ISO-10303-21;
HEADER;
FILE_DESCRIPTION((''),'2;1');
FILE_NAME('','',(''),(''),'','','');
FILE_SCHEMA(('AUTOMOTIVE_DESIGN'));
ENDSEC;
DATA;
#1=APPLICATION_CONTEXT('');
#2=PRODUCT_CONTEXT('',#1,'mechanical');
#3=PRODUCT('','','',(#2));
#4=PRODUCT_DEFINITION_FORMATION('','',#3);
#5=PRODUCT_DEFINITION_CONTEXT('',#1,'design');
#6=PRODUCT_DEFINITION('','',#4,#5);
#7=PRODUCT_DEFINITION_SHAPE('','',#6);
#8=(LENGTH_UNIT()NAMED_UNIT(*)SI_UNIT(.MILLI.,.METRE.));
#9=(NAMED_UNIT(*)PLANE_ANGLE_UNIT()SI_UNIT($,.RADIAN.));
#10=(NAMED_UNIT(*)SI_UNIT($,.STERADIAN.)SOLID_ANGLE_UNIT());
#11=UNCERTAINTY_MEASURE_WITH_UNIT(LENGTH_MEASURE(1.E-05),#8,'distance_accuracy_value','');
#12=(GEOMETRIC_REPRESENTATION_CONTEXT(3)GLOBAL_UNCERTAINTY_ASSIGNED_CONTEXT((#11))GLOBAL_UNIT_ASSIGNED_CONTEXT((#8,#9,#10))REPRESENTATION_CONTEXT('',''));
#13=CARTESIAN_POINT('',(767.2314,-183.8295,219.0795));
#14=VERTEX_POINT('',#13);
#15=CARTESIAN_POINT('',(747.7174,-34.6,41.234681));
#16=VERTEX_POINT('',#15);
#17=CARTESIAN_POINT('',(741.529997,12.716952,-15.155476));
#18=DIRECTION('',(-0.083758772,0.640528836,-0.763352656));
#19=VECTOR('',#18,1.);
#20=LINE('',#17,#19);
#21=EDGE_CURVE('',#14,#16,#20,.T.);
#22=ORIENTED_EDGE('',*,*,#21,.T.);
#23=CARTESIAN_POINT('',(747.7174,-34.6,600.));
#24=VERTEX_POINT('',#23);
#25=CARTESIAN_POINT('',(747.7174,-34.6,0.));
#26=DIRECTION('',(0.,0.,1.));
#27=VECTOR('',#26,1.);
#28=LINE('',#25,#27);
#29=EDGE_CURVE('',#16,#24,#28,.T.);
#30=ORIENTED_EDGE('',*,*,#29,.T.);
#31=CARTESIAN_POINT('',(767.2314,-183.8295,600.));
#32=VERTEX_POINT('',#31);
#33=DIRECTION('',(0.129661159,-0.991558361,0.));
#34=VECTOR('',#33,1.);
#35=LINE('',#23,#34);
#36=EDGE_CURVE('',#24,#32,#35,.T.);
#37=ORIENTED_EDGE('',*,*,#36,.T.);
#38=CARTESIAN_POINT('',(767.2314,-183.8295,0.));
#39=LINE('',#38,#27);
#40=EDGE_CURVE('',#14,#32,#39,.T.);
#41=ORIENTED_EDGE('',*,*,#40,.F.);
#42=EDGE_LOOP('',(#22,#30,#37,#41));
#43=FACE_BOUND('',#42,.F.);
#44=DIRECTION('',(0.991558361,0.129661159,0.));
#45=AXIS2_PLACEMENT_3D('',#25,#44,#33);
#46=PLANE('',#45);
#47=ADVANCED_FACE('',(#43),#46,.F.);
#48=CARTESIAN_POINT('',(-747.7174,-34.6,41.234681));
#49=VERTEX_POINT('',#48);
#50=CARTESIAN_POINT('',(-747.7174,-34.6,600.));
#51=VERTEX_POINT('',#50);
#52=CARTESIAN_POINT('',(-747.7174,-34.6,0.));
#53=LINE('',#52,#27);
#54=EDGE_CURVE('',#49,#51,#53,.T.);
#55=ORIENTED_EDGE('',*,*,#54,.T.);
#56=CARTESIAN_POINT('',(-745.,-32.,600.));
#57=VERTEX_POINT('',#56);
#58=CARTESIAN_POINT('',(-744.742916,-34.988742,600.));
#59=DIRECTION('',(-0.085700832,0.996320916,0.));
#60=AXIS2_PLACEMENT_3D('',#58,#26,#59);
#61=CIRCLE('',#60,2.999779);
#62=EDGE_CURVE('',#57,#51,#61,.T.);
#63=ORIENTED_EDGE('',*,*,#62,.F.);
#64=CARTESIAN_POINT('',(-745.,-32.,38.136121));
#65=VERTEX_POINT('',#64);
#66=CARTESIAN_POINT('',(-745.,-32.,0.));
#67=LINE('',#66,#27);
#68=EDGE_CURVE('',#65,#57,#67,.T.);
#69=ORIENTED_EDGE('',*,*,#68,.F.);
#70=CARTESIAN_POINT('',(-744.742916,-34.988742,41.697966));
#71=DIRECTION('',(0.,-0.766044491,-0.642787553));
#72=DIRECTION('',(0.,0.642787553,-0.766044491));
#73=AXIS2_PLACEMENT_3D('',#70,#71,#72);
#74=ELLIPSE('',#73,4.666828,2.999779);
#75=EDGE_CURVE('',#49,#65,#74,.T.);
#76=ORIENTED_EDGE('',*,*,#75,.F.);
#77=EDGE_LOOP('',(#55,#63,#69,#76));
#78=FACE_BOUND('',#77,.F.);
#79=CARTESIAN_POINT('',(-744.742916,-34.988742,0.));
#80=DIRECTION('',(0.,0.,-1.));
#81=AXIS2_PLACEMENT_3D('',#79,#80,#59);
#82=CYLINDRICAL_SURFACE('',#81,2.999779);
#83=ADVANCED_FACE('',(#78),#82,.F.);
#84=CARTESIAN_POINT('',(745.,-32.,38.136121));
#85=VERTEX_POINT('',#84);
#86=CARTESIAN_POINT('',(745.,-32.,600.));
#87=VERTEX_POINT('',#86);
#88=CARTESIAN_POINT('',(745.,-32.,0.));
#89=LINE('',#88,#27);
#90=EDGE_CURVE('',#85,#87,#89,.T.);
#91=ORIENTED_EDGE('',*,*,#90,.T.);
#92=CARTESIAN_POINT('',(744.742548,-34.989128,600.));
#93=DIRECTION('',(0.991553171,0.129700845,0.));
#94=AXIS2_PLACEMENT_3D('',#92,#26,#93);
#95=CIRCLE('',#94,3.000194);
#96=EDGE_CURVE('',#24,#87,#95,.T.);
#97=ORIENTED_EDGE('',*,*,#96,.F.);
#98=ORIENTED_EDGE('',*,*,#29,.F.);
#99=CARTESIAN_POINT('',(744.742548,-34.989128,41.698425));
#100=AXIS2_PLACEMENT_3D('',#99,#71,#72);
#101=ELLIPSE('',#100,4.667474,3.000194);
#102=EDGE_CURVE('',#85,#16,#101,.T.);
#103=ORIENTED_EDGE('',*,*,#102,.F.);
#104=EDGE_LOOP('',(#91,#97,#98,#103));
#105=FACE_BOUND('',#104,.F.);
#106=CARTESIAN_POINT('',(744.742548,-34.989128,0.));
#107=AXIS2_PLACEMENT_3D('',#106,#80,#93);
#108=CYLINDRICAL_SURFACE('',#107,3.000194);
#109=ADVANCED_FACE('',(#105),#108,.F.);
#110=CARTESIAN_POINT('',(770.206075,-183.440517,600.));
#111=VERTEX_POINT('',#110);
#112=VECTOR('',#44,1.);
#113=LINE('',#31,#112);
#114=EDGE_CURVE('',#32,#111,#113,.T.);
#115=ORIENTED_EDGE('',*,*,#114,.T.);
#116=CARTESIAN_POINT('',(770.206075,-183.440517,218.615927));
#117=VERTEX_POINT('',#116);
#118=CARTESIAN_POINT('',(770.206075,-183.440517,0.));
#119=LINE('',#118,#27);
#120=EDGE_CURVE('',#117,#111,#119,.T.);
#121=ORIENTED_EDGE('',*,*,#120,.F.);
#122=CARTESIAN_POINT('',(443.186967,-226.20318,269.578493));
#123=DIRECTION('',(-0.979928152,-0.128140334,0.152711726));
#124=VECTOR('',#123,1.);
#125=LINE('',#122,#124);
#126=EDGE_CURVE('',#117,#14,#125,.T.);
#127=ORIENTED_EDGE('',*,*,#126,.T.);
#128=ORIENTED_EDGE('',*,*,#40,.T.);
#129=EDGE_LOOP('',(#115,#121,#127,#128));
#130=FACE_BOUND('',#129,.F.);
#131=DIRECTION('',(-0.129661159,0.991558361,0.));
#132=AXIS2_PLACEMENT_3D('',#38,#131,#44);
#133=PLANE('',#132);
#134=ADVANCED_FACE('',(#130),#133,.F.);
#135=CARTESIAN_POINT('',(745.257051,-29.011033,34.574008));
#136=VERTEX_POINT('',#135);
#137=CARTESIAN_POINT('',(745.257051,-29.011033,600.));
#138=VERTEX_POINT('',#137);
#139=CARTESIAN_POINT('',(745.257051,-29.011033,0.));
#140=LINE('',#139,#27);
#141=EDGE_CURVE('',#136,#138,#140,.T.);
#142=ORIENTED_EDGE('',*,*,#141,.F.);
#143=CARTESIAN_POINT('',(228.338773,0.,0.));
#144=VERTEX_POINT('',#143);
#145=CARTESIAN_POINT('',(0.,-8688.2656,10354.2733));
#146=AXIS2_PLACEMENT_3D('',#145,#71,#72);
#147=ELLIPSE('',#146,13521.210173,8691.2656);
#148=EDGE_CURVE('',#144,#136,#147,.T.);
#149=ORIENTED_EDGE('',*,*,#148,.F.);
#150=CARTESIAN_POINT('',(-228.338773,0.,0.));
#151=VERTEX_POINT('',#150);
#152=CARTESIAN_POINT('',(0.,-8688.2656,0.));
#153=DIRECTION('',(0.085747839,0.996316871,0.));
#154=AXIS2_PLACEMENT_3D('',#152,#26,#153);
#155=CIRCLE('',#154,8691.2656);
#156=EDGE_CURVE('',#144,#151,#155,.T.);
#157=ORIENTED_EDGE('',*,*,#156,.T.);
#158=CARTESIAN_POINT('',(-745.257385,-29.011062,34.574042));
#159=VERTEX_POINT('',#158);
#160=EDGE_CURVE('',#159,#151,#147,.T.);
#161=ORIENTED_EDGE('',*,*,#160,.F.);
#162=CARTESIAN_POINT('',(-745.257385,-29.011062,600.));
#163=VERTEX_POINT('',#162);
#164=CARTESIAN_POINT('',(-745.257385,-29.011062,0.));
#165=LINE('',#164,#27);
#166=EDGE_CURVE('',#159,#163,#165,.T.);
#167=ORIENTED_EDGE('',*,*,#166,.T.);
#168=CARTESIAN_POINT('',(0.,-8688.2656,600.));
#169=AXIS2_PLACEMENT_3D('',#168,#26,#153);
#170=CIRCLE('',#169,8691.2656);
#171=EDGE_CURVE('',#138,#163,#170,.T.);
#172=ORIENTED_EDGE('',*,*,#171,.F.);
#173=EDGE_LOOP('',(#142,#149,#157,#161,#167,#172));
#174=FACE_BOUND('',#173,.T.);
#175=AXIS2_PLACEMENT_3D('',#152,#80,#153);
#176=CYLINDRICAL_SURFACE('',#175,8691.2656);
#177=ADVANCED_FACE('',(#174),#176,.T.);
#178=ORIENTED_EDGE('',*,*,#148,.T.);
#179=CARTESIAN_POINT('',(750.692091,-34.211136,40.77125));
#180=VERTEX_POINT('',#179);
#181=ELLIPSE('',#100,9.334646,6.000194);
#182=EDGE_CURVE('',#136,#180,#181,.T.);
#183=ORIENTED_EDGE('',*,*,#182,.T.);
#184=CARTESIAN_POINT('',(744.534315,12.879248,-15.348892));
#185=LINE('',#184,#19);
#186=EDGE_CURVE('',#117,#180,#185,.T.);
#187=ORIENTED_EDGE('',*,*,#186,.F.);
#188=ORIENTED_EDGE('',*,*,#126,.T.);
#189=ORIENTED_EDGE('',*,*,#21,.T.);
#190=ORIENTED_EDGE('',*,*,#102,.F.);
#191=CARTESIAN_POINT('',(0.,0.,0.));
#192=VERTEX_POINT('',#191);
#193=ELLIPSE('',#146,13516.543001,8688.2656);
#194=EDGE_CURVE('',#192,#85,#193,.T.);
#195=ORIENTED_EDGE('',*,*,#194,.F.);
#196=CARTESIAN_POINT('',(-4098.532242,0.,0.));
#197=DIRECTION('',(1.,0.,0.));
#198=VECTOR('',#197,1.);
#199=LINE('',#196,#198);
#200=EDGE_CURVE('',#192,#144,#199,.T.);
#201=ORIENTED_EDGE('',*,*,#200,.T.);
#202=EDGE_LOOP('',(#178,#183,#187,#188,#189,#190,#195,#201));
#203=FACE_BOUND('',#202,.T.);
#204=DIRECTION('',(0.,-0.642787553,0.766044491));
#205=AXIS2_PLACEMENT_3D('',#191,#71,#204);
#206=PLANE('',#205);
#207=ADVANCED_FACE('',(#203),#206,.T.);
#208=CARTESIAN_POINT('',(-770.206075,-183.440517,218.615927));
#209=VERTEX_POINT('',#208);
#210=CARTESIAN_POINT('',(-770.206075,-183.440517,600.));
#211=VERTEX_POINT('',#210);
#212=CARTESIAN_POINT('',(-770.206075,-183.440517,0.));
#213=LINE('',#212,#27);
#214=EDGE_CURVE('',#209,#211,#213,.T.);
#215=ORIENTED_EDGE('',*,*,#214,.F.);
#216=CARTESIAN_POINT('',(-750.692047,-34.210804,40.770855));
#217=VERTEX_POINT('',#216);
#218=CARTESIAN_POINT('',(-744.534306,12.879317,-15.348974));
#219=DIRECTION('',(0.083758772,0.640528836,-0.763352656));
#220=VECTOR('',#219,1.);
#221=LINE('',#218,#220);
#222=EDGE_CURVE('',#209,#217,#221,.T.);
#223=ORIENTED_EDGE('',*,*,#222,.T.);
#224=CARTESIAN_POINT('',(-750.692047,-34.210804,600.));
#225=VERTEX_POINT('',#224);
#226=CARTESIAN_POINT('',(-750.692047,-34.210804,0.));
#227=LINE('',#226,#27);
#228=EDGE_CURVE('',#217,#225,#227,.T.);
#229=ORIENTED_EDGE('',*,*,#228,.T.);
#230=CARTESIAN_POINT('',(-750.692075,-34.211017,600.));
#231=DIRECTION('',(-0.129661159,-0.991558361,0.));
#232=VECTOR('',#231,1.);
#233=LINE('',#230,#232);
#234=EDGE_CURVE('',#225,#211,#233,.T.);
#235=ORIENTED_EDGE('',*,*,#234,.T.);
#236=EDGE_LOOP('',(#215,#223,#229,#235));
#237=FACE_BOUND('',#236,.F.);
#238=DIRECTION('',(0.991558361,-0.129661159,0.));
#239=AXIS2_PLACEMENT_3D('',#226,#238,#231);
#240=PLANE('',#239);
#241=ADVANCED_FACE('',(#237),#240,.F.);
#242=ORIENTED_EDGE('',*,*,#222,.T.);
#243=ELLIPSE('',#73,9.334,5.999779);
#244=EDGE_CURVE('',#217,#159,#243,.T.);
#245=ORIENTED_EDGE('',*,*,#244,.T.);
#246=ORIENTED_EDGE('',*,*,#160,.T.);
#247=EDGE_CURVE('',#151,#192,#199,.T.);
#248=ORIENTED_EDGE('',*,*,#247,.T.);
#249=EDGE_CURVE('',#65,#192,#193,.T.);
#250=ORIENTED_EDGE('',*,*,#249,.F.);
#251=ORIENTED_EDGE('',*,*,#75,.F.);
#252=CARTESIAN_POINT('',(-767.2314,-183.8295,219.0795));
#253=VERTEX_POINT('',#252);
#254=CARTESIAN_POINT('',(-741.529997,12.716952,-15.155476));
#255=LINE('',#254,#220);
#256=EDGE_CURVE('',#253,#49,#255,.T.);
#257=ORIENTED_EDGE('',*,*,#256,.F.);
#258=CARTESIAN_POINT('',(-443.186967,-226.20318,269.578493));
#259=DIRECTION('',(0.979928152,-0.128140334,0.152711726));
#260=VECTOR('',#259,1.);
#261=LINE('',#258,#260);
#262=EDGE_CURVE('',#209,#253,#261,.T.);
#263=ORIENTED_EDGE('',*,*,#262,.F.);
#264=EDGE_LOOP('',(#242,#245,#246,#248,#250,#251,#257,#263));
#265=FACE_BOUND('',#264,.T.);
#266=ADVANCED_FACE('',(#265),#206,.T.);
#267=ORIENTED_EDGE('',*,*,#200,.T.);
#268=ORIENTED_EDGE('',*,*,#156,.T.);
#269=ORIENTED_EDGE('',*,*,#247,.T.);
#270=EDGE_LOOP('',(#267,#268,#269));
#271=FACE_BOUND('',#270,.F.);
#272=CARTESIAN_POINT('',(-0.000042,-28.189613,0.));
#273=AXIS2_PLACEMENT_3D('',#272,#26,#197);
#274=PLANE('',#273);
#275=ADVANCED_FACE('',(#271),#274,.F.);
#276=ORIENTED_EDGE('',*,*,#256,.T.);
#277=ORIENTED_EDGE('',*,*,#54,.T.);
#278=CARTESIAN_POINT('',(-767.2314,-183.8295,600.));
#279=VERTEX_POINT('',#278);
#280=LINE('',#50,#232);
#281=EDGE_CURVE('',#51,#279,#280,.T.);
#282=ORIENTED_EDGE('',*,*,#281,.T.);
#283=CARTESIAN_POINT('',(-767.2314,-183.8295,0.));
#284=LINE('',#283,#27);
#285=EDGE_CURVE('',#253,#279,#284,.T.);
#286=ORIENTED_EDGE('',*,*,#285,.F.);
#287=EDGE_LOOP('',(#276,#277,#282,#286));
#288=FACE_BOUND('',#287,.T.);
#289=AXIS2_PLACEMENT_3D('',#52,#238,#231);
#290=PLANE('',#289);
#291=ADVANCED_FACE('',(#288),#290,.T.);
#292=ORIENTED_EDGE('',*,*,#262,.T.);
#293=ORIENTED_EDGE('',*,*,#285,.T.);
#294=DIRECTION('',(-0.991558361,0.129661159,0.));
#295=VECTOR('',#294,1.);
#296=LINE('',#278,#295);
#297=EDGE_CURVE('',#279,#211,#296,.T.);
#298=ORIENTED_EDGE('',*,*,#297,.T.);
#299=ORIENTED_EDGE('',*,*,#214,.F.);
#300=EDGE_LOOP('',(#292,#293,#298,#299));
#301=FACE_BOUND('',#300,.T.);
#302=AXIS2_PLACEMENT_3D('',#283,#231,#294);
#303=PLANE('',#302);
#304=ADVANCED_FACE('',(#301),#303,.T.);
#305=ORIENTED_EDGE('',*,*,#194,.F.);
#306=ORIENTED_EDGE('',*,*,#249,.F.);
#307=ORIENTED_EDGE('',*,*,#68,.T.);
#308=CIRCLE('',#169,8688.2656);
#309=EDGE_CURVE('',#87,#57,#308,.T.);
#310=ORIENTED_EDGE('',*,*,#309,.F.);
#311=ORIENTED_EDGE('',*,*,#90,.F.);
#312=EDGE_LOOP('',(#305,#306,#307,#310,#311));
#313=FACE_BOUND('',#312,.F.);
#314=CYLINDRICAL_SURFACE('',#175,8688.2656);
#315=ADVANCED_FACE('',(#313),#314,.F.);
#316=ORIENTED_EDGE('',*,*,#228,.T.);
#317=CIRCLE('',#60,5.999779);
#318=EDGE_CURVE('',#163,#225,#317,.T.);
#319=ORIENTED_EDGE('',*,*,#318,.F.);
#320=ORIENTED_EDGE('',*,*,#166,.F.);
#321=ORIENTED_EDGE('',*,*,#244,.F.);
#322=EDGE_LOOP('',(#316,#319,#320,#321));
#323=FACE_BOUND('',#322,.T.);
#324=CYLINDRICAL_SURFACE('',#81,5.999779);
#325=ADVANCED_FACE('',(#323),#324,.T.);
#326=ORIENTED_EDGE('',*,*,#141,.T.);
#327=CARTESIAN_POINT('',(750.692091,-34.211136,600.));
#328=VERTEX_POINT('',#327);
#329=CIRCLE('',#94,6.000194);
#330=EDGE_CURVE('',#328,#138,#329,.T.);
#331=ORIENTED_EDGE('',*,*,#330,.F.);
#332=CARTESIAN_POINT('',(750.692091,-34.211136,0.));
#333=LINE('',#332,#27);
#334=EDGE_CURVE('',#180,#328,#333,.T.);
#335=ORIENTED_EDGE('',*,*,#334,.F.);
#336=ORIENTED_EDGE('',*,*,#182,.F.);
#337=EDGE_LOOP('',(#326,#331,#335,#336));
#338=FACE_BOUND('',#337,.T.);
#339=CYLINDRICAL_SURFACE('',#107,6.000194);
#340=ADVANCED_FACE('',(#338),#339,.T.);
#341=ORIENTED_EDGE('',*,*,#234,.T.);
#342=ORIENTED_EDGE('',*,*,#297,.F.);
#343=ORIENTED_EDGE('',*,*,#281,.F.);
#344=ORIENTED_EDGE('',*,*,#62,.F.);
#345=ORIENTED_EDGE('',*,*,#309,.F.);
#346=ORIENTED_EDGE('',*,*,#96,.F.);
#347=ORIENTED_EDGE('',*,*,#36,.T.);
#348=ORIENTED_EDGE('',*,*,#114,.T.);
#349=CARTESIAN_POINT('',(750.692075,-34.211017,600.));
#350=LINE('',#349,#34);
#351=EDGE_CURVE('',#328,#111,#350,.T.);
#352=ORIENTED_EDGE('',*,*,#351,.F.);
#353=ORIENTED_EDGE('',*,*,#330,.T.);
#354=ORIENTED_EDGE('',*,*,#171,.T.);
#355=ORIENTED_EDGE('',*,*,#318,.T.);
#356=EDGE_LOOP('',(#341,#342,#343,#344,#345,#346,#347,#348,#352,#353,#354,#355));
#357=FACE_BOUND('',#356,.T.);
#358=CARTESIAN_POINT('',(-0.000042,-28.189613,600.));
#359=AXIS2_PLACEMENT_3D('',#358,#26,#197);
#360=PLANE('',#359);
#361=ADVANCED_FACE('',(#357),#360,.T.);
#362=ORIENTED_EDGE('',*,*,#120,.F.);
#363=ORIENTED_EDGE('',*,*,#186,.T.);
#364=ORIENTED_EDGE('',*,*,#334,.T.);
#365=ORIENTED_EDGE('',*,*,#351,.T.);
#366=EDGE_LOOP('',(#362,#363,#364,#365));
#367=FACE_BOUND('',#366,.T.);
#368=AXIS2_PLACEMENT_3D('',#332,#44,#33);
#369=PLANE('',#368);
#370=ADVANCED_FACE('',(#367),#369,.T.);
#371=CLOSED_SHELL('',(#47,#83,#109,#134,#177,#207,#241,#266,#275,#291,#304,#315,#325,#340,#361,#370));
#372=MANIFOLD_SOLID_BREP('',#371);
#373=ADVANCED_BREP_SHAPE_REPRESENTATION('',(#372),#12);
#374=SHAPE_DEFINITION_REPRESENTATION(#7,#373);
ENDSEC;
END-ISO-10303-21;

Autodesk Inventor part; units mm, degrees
ref_plane "YZ Plane" through (0, 0, 0) normal (1, 0, 0) x (0, 1, 0)
ref_plane "XZ Plane" through (0, 0, 0) normal (0, 1, 0) x (-1, 0, 0)
ref_plane "XY Plane" through (0, 0, 0) normal (0, 0, 1) x (1, 0, 0)
sketch "Sketch1" plane through (0, 0, 0) normal (0, 0, 1) x (1, 0, 0)
  line L0 (-785, -32) -> (785, -32) construction
  line L1 (785, -32) -> (785, 0) construction
  line L2 (785, 0) -> (-785, 0) construction
  line L3 (-785, 0) -> (-785, -32) construction
  arc A0 (745, -32) -> (-745, -32) centre (0, -8688.2656) ccw
  arc A1 (-745, -32) -> (-747.7174, -34.6) centre (-744.7428, -34.989) ccw
  line L4 (-747.7174, -34.6) -> (-767.2314, -183.8295)
  arc A2 (747.7174, -34.6) -> (745, -32) centre (744.7428, -34.989) ccw
  line L5 (747.7174, -34.6) -> (767.2314, -183.8295)
  line L6 (0, 0) -> (0, -32) construction
  dimension "d0" = 1570
  dimension "d1" = 32
  dimension "d2" = 40
  dimension "d14" = 3
  dimension "d15" = 150.5
  dimension "d16" = 97.45
  dimension "d21" = 8688.2656
contour flange "Contour Flange1" sketch "Sketch1" thickness 3 bend radius 3 width 600 along (0, 0, 1) mid plane no both sides no wall seen from (757.4744, -109.2147, 0) lies toward (0.9915584, 0.1296609, 0) curves L5 A2 A0 A1 L4
bend "Bend1"
corner "Corner1"
sketch "Sketch2" plane through (0, 0, 0) normal (1, 0, 0) x (0, 1, 0)
  line L0 (3, 0) -> (3, 600) construction
  line L1 (0, 600) -> (-183.8295, 380.9205)
  line L2 (3, 0) -> (-29.011, 0) projected
  line L3 (0, 0) -> (-183.8295, 219.0795)
  line L4 (-183.8295, 0) -> (-183.8295, 600) projected
  line L5 (3, 600) -> (-183.8295, 600)
  line L6 (-183.8295, 0) -> (3, 0)
  line L7 (0, 0) -> (-32, 0) projected
  line L8 (-32, 600) -> (0, 600) projected
  line L9 (0, 0) -> (0, 600) construction
  point P0 (-29.011, 0)
  point P1 (0, 0)
  dimension "d20" = 40
extrude "Extrusion1" cut sketch "Sketch2" along normal through all both and the other way through all contours L2 L6 L4 L3
equation "\"d14\" = BendRadius"
equation "\"d3\" = Thickness"
equation "\"d4\" = BendReliefWidth"
equation "\"d5\" = BendReliefDepth"
equation "\"d6\" = MinimumRemnant"
equation "\"d7\" = TransitionRadius"
equation "\"d9\" = BendRadius"
equation "\"d11\" = CornerReliefSize"
equation "\"d12\" = GapSize"
equation "\"d13\" = JacobiRadiusSize"
equation "\"BendRadius\" = Thickness"
equation "\"BendReliefWidth\" = Thickness"
equation "\"BendReliefDepth\" = 0.5 * Thickness"
equation "\"CornerReliefSize\" = 4 * Thickness"
equation "\"MinimumRemnant\" = 2 * Thickness"
equation "\"TransitionRadius\" = BendRadius"
equation "\"JacobiRadiusSize\" = BendRadius"
equation "\"GapSize\" = Thickness"
equation "\"Поясница_радиус\" = d21"
equation "\"Thickness\" = 3"
properties part number "МОО 031 лист спина 2" material "Stainless Steel AISI 304"
